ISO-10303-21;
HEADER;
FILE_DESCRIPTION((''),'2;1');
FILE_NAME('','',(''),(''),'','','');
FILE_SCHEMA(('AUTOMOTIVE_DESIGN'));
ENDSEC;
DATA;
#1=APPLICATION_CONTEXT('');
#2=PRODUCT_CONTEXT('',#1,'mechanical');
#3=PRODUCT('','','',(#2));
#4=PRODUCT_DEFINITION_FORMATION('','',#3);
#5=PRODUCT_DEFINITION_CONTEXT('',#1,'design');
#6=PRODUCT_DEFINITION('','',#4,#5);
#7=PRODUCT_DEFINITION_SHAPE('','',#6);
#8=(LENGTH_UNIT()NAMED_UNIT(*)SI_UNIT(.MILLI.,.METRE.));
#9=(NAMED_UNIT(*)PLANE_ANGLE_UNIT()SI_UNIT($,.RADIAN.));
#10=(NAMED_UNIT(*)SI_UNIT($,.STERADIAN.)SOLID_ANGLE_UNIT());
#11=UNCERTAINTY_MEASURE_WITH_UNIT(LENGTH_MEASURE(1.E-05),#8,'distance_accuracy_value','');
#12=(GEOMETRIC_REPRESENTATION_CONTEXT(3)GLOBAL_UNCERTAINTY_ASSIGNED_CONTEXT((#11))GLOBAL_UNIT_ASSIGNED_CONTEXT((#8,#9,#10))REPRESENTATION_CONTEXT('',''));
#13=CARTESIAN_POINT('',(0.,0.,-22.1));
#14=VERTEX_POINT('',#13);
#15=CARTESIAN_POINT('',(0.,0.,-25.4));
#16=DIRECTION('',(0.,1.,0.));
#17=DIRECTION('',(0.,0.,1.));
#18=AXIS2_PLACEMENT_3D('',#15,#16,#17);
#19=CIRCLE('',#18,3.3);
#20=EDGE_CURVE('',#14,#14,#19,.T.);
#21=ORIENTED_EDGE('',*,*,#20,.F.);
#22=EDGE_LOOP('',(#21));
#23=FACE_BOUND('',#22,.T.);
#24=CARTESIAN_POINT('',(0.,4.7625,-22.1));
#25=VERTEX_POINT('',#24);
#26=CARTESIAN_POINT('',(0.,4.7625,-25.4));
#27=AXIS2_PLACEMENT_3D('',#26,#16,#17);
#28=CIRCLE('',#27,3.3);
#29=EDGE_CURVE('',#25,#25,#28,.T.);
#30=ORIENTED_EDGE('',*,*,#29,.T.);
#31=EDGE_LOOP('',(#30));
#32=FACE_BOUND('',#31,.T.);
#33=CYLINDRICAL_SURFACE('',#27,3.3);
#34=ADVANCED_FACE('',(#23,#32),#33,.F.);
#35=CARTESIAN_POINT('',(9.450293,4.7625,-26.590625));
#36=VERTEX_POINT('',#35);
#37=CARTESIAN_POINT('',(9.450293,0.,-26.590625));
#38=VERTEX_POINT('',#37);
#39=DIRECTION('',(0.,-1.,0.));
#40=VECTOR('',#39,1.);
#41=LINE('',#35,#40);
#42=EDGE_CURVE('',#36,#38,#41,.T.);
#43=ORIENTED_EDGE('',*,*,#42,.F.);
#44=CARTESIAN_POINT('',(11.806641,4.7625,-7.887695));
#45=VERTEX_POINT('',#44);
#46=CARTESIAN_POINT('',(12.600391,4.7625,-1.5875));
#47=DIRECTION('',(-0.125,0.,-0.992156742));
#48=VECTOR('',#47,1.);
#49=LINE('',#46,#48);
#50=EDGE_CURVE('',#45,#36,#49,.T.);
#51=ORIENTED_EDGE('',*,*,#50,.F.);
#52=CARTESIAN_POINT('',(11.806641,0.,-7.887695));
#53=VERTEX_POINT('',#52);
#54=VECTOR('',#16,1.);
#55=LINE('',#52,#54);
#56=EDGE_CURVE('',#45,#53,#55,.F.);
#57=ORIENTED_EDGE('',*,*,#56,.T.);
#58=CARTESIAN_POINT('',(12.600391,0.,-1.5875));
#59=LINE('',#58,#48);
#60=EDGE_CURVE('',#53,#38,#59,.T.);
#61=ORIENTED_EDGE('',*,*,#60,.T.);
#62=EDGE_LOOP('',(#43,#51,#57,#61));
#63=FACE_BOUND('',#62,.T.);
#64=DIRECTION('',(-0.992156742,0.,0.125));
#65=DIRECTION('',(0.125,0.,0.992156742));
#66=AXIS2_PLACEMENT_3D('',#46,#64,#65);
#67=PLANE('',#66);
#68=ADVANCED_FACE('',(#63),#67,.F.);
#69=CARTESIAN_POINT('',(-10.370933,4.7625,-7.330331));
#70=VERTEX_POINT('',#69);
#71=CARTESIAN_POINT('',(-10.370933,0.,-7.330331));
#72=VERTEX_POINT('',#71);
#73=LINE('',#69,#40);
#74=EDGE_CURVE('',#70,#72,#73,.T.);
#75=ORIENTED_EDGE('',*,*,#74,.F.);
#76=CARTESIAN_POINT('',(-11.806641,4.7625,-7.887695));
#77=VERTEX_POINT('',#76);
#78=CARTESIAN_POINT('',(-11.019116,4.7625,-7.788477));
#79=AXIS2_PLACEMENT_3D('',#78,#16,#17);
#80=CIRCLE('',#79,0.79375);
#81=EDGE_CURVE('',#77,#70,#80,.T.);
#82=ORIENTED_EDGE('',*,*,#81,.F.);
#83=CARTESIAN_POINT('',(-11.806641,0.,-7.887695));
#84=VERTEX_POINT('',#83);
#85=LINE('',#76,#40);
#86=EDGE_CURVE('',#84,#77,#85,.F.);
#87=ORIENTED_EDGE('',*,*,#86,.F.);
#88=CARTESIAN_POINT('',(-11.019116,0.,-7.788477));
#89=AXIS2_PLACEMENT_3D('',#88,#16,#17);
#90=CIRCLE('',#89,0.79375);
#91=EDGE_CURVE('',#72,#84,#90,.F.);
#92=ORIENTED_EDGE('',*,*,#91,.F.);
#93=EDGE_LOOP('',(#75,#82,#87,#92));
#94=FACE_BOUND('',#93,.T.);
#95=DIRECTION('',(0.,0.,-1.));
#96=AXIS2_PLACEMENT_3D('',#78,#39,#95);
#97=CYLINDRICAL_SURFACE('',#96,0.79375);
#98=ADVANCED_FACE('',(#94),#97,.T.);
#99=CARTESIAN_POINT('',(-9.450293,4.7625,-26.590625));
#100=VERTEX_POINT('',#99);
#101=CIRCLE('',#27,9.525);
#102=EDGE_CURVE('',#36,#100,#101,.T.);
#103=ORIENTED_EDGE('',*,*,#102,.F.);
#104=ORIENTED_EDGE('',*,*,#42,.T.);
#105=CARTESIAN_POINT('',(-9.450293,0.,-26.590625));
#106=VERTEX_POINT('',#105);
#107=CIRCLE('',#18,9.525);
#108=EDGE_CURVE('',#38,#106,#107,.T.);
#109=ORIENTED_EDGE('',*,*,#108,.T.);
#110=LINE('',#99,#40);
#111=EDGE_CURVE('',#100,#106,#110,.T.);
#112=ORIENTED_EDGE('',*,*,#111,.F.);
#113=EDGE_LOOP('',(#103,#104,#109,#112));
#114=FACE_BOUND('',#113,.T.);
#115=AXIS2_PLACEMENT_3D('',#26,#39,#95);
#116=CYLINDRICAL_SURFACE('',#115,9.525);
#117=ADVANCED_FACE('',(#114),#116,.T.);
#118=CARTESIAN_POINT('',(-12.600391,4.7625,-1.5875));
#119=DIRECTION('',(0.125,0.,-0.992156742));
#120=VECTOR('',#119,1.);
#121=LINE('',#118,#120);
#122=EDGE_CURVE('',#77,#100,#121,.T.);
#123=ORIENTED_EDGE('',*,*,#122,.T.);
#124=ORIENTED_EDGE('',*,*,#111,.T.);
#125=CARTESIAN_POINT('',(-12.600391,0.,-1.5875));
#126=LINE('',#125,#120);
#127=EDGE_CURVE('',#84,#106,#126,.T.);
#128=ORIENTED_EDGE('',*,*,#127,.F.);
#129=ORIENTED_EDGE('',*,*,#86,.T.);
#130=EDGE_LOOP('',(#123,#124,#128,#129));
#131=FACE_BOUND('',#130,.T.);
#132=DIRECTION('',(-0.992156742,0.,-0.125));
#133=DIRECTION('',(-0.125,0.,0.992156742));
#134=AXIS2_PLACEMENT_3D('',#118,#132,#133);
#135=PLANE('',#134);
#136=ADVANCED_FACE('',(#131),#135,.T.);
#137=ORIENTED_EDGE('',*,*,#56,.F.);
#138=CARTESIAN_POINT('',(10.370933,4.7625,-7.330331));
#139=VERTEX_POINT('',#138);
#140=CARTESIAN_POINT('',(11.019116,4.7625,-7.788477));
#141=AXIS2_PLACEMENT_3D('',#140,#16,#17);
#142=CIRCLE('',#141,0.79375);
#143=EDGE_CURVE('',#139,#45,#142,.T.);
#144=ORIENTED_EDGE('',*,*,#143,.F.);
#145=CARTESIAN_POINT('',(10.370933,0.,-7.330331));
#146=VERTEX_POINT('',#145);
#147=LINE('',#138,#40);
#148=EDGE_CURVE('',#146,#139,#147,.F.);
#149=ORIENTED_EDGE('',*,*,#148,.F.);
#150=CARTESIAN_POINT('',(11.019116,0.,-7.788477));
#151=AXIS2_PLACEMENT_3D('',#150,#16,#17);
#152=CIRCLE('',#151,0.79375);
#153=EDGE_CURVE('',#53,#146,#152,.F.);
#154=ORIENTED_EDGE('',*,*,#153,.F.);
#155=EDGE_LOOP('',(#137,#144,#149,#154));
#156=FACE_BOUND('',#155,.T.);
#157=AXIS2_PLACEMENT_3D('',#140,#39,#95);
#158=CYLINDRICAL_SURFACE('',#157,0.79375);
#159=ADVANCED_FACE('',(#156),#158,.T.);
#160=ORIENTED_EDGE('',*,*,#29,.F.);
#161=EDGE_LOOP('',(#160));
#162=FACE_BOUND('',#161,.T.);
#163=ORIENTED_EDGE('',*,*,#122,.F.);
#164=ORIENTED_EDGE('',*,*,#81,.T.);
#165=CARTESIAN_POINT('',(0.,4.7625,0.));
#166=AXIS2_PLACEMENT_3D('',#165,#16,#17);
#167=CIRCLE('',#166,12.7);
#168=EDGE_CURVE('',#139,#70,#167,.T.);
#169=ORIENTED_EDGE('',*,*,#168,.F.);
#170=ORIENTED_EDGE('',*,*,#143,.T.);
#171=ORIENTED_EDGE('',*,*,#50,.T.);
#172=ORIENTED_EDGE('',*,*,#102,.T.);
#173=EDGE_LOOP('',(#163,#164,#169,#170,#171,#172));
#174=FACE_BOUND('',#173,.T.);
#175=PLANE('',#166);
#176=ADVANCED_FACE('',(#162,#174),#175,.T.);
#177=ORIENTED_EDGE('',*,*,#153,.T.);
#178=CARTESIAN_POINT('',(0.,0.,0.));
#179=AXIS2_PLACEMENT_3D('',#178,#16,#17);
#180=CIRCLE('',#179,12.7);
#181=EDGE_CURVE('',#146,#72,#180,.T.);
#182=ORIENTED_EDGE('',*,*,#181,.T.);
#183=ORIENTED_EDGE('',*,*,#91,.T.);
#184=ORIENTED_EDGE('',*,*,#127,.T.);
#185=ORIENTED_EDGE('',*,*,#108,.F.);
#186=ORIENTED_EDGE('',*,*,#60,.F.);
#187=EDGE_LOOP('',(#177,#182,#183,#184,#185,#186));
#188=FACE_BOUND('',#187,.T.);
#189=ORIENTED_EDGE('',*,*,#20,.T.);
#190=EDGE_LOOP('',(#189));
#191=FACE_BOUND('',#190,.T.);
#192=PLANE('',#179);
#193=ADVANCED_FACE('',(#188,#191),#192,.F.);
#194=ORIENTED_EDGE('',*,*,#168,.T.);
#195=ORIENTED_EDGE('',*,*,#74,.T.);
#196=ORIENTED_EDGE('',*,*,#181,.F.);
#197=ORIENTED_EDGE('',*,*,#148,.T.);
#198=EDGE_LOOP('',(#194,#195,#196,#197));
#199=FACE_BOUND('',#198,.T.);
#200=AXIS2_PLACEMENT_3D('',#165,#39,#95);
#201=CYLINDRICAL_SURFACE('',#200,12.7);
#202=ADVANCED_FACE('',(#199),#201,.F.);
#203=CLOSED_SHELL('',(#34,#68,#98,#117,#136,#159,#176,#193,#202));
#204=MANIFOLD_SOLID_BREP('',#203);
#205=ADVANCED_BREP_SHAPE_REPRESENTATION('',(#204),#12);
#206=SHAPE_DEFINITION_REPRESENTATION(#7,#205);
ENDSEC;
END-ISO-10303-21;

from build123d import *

# Parameters (mm, degrees)
BOSS_EXTRUDE1_DEPTH  = 4.7625
FILLET1_R            = 0.79375
M6_CLEARANCE_HOLE1_D = 6.6


with BuildPart() as part:
    # Sketch1 → Boss-Extrude1 (new body)
    with BuildSketch(Plane(origin=(0, 0, 0), x_dir=(1, 0, 0), z_dir=(0, 1, 0))):
        with BuildLine():
            Line((-9.450292964208833, 26.590625), (-12.60039061894511, 1.5874999999999988))
            ThreePointArc((-12.60039061894511, 1.5875000000000075), (6.42e-15, 12.699999999999998), (12.600390618945111, 1.587499999999999))
            Line((12.60039061894511, 1.5874999999999988), (9.450292964208833, 26.590625))
            ThreePointArc((9.450292964208835, 26.590625), (5.8e-16, 34.925), (-9.450292964208835, 26.590625))
        make_face()
    extrude(amount=BOSS_EXTRUDE1_DEPTH)

    # Fillet1
    fillet1_edges = [part.edges().sort_by_distance(p)[0] for p in [
        (12.60039061894511, 2.38125, -1.5874999999999981),
        (-12.60039061894511, 2.38125, -1.587500000000003),
    ]]
    fillet(fillet1_edges, radius=FILLET1_R)

    # M6 Clearance Hole1 (through all)
    with Locations(Plane(origin=(0, 4.7625, 0), x_dir=(1, 0, 0), z_dir=(0, 1, 0))):
        with Locations((0, 25.4)):
            Hole(M6_CLEARANCE_HOLE1_D / 2)


solid = part.part
